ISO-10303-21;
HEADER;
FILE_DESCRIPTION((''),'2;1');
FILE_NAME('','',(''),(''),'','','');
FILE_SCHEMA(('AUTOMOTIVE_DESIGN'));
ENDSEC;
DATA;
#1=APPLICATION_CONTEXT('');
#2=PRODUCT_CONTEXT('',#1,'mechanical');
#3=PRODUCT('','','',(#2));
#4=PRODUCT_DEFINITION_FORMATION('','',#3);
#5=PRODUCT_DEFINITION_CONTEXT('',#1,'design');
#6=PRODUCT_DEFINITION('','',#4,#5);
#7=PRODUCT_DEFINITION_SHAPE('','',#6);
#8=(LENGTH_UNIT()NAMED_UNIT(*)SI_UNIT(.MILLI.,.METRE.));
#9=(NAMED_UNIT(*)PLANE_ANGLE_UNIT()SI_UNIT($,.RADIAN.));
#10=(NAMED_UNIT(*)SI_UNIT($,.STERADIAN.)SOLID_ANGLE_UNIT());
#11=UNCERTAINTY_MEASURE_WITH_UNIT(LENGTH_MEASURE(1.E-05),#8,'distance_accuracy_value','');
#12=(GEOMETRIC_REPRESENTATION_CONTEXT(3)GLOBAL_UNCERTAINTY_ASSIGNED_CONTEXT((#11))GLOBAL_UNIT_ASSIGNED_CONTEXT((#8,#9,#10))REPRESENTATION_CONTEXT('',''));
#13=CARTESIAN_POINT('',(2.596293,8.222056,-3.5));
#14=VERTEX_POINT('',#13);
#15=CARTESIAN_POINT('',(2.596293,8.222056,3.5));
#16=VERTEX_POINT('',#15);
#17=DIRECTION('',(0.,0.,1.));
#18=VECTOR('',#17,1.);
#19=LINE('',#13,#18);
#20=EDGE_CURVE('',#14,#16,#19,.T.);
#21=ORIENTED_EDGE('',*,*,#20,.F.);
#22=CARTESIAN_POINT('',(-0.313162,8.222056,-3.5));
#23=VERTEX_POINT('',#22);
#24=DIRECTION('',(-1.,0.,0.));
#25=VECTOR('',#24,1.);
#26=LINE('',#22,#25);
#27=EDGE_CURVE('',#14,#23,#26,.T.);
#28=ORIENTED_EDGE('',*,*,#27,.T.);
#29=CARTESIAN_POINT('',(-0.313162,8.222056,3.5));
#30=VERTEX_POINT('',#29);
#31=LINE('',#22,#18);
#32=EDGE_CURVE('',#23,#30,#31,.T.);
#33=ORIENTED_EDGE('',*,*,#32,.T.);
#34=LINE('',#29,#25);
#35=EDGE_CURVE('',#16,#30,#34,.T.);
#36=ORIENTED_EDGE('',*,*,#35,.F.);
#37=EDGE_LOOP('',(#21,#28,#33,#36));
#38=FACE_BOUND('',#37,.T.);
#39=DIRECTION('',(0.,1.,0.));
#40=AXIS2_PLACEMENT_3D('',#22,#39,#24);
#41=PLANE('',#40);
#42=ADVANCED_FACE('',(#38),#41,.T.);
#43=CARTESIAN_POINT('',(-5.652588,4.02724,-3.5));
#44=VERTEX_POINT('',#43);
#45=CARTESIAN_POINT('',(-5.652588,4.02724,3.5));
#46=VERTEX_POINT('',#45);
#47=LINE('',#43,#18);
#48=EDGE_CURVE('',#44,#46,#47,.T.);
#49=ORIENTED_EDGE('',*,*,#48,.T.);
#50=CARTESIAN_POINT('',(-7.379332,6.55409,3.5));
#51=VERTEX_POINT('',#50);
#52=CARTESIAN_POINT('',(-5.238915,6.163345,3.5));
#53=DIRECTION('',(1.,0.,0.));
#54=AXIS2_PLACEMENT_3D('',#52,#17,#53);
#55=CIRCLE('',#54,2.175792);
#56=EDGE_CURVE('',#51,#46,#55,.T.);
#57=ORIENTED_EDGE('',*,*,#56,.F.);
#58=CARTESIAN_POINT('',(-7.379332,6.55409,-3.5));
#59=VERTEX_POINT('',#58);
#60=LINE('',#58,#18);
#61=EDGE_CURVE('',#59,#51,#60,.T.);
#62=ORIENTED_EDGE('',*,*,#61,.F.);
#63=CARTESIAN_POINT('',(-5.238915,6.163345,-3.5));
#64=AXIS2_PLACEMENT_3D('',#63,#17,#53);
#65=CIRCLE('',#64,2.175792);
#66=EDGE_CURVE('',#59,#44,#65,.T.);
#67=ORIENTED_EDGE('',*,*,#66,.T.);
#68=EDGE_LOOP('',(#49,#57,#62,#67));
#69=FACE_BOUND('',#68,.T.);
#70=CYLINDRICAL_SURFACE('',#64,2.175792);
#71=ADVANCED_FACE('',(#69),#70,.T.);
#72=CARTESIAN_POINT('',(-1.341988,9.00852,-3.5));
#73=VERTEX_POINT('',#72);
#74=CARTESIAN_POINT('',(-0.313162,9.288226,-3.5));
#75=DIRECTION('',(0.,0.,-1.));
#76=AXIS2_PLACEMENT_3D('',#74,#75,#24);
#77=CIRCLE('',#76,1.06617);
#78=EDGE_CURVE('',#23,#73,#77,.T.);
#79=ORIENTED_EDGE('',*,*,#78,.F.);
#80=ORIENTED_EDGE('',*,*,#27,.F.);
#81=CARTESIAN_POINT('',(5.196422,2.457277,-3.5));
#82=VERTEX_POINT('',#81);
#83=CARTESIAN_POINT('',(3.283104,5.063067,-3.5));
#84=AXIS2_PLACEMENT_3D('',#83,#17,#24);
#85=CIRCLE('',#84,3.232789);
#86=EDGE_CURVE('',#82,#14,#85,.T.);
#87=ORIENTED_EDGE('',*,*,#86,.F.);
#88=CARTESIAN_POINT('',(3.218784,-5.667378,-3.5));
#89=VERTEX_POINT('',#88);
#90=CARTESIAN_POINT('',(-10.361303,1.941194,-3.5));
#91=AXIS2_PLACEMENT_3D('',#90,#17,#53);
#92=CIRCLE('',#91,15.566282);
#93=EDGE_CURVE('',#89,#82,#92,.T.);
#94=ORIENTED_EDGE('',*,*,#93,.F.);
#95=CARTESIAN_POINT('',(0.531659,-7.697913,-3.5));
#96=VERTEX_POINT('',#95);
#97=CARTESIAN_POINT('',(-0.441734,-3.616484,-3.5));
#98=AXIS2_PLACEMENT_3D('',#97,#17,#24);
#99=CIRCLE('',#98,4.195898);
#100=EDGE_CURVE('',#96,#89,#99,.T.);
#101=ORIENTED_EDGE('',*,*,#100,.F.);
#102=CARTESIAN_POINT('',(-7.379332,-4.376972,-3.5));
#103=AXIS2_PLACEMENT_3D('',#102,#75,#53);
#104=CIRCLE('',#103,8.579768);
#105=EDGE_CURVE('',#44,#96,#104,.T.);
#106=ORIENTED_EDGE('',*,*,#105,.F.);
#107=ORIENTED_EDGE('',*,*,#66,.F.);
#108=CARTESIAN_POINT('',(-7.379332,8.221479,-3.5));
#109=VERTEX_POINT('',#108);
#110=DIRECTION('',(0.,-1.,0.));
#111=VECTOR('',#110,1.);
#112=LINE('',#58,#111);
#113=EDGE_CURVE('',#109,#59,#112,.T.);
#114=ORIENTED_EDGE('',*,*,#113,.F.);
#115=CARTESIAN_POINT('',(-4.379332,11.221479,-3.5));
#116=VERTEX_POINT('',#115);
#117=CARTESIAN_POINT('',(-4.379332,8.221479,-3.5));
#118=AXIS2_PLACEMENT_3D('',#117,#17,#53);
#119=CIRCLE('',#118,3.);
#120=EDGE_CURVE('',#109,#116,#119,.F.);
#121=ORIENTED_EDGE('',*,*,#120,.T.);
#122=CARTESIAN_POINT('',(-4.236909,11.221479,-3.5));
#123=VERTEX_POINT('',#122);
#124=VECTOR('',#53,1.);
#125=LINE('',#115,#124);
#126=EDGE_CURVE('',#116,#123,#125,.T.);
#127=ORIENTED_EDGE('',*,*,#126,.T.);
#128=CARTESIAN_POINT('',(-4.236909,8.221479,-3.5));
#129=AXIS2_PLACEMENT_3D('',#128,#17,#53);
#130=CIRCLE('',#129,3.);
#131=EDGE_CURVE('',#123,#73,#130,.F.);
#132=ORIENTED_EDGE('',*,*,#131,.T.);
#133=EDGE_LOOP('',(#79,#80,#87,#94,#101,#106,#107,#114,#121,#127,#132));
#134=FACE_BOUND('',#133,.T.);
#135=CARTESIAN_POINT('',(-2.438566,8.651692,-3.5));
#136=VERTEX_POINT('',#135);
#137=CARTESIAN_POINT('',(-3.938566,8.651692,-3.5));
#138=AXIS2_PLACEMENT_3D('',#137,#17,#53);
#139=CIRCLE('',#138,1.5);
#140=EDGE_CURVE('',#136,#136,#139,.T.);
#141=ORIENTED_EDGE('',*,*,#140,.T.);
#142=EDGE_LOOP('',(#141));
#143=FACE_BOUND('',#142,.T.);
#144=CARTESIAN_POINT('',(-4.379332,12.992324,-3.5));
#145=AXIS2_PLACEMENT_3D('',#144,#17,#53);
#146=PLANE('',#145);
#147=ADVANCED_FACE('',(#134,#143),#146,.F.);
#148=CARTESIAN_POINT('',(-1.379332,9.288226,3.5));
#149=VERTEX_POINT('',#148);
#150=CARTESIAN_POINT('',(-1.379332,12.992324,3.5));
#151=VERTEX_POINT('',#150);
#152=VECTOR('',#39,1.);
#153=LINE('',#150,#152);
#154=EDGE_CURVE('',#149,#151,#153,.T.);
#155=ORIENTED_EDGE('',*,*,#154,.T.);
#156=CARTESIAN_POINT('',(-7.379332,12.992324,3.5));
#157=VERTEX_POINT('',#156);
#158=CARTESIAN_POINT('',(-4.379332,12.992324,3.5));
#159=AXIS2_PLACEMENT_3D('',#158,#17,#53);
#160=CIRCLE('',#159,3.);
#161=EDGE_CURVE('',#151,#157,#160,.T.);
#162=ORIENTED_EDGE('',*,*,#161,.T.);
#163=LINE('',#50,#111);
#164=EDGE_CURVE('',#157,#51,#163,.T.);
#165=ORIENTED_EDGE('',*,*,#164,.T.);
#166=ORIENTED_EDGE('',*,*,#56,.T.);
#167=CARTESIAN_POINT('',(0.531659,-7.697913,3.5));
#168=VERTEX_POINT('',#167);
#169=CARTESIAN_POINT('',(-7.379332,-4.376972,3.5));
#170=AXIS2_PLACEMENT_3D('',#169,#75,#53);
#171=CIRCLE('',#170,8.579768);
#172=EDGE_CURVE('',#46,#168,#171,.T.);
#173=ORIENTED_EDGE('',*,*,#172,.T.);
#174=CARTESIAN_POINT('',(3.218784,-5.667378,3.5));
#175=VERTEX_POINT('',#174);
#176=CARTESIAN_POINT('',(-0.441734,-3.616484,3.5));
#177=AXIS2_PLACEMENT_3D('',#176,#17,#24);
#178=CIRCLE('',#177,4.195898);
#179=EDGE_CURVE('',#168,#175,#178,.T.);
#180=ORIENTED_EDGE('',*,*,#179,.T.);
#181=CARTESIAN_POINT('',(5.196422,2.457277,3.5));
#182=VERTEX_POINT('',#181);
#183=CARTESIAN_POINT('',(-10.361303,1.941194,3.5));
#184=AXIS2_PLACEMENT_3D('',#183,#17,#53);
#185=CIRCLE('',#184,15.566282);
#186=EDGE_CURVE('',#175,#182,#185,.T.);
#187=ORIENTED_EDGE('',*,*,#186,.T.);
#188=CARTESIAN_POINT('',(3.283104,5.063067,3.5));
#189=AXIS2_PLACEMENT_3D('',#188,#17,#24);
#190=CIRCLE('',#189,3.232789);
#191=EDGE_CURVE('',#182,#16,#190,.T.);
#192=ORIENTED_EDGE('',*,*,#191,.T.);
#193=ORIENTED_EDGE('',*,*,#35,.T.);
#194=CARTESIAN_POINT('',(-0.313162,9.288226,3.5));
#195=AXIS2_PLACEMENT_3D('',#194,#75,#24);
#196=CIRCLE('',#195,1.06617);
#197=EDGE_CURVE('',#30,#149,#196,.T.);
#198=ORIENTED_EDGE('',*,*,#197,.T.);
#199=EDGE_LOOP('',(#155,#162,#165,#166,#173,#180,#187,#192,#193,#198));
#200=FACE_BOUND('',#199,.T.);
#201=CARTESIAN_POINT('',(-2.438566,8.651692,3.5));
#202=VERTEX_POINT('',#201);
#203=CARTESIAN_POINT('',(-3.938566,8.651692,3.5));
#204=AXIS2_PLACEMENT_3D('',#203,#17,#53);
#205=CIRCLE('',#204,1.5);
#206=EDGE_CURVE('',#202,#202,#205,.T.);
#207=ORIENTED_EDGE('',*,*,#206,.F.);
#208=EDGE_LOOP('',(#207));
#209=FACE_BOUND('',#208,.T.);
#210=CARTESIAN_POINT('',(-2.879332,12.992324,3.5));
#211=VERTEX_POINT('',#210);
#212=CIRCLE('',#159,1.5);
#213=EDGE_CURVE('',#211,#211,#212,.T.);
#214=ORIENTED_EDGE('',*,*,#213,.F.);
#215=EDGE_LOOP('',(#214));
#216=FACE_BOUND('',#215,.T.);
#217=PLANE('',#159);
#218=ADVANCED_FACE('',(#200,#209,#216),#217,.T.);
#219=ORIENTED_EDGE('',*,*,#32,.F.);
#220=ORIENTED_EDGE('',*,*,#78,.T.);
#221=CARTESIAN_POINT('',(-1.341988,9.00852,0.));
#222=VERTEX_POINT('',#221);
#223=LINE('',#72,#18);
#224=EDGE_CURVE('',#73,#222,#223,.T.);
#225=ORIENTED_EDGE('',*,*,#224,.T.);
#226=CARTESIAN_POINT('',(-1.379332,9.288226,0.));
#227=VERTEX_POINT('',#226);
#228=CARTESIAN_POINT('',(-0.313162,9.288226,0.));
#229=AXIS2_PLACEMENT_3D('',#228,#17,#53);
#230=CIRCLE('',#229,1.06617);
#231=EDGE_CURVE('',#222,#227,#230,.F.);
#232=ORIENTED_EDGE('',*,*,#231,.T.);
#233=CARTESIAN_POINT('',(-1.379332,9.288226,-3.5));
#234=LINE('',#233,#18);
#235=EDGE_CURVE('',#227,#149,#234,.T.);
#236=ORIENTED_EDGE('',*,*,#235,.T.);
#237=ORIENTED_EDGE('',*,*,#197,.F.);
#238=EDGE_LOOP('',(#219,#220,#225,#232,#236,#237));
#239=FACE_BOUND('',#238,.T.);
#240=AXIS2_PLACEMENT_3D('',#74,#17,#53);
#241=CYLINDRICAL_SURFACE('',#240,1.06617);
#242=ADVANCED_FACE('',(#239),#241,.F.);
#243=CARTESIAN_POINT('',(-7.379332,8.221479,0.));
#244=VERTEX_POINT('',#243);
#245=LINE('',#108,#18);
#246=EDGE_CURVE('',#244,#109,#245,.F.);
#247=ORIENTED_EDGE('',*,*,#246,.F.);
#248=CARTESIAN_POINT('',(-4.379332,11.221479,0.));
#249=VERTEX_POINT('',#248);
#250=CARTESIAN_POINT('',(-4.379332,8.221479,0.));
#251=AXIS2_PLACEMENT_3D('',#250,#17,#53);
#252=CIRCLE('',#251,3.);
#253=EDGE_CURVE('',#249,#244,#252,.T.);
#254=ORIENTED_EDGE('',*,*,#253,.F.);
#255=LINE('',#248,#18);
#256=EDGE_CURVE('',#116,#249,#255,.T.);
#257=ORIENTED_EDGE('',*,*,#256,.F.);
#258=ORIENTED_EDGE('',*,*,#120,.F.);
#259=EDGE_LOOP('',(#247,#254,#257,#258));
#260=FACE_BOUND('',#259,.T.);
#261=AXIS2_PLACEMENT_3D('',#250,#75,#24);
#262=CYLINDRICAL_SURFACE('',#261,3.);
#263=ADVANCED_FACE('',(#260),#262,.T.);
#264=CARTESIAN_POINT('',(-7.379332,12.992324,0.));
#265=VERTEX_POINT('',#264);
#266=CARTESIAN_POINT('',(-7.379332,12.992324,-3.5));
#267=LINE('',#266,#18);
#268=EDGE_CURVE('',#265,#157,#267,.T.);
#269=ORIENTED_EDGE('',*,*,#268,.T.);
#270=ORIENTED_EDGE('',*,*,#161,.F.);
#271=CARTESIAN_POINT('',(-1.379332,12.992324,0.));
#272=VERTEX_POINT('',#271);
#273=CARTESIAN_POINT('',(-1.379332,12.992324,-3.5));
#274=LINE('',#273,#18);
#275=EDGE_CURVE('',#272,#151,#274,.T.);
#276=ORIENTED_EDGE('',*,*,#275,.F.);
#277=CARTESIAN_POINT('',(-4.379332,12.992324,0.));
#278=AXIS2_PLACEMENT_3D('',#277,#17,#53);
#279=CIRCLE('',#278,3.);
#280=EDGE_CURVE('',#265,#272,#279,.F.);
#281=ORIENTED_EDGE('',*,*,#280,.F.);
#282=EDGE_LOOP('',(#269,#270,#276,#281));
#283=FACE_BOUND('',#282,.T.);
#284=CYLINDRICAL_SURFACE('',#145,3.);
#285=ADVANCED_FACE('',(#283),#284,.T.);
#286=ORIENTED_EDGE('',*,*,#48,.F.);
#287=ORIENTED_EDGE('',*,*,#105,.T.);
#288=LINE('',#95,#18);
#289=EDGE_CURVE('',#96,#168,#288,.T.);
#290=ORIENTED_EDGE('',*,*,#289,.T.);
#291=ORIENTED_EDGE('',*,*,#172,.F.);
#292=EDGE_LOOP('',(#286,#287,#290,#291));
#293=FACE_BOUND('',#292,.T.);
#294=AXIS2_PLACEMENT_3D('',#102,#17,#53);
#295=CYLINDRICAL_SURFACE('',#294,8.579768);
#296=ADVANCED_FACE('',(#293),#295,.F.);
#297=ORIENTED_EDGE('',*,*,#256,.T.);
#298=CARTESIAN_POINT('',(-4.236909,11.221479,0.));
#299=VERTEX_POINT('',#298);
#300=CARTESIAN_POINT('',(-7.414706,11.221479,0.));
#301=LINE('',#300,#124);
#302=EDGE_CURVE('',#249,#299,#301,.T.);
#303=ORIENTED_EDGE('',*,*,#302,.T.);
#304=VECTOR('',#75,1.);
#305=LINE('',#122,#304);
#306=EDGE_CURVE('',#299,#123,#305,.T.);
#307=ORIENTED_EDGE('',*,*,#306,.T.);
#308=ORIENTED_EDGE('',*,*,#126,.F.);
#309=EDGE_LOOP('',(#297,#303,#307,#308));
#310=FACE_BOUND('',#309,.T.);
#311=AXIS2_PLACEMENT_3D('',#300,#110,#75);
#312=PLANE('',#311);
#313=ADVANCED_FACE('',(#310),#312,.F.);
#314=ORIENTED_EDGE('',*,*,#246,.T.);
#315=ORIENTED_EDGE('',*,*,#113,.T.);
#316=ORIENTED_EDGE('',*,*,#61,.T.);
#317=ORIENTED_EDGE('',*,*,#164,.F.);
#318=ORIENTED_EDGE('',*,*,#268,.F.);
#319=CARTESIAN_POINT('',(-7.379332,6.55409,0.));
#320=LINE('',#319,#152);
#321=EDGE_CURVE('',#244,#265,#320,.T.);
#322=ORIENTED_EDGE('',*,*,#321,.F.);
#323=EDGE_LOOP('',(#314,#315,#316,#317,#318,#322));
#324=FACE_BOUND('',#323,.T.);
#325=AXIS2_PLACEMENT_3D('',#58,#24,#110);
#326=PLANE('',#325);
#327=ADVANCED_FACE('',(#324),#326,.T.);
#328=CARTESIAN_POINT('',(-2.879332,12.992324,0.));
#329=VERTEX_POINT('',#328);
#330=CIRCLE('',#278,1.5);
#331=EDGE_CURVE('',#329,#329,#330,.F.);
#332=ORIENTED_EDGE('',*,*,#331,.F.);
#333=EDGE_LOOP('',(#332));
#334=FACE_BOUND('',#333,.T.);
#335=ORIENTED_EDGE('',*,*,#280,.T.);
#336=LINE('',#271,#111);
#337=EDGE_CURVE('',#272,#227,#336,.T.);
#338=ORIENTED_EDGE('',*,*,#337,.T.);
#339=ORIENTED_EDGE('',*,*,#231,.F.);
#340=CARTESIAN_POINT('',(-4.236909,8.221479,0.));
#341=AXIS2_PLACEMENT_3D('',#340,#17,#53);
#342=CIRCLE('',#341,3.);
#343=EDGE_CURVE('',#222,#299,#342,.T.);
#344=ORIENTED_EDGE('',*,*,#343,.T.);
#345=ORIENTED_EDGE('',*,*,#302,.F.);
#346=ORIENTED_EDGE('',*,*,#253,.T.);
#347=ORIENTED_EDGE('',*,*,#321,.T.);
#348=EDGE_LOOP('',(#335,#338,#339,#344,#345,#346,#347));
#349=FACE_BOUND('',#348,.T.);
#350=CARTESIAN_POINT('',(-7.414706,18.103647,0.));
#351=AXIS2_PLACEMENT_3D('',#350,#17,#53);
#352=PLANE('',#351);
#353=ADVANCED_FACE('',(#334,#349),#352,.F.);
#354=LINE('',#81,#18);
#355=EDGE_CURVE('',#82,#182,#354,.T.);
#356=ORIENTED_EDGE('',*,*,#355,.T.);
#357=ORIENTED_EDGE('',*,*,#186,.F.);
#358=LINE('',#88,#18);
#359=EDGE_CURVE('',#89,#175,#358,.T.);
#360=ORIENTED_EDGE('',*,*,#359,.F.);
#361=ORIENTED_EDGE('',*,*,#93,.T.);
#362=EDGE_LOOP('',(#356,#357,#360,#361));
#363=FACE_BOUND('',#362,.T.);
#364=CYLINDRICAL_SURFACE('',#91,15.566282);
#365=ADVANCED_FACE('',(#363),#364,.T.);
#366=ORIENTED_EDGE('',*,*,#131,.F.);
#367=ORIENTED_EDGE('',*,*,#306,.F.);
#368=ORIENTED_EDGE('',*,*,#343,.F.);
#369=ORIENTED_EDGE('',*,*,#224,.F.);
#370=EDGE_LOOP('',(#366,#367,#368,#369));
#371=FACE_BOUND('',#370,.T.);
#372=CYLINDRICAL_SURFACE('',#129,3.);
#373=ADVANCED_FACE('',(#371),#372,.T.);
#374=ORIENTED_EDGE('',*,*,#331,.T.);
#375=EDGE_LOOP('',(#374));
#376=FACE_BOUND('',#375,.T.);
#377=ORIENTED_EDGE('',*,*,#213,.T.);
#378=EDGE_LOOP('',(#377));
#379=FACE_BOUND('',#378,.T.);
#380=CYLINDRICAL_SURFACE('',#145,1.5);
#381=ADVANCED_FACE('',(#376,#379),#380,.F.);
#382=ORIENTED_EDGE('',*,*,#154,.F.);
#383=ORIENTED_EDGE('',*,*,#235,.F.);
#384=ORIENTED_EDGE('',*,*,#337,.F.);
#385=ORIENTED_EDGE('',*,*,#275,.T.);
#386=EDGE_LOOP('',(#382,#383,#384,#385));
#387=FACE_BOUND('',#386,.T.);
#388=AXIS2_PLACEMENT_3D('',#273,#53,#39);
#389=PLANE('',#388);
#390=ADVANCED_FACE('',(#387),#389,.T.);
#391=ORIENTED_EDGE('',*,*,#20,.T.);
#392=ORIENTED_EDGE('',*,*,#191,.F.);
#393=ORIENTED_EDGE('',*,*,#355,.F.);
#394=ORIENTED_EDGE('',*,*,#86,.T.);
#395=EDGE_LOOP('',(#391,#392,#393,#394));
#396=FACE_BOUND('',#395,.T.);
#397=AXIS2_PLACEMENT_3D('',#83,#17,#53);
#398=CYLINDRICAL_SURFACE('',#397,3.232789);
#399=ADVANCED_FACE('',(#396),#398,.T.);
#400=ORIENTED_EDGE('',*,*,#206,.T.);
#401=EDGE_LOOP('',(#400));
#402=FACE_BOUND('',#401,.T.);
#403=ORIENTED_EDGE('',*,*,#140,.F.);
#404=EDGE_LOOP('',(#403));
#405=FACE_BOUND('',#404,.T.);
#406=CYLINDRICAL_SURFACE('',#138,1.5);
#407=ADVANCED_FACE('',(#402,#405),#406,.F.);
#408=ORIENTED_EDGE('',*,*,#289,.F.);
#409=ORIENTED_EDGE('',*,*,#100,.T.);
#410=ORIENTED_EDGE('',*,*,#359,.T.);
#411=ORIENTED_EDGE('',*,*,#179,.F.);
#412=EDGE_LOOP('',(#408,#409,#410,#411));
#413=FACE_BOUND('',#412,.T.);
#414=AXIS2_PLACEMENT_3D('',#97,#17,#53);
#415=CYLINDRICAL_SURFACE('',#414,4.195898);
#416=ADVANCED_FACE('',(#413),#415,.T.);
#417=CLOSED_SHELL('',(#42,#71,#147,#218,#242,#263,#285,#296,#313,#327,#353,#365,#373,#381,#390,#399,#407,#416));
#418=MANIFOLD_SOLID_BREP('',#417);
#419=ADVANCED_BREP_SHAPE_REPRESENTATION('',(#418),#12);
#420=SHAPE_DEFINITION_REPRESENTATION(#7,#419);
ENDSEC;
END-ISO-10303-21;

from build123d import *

# Parameters (mm, degrees)
BOSS_EXTRUDE1_DEPTH      = 3.5
BOSS_EXTRUDE1_DEPTH_BACK = 3.5
SKETCH6_R                = 1.5
CUT_EXTRUDE1_DEPTH       = 19.96660999
SKETCH7_W                = 4.034122634
SKETCH7_H                = 6.882168449
CUT_EXTRUDE2_DEPTH       = 18.97170817
FILLET1_R                = 3
CUT_EXTRUDE3_DEPTH       = 18.97170817
CUT_EXTRUDE3_DEPTH_BACK  = 18.97170817
SKETCH5_R                = 1.5


with BuildPart() as part:
    # Sketch1 → Boss-Extrude1 (new, two sides: drawn at the far end of the back side and taken through both)
    with BuildSketch(Plane.XY.offset(-BOSS_EXTRUDE1_DEPTH_BACK)):
        with BuildLine():
            Line((-7.379331989, 6.554089817), (-7.379331989, 12.992324067))
            ThreePointArc((-7.379331989, 12.992324067), (-4.379331989, 15.992324067), (-1.379331989, 12.992324067))
            Line((-1.379331989, 12.992324067), (-1.379331989, 9.288226288))
            ThreePointArc((-1.379331989, 9.288226288), (-1.067058002, 8.534330194), (-0.313161909, 8.222056208))
            Line((-0.313161909, 8.222056208), (2.596292865, 8.222056208))
            ThreePointArc((2.596292865, 8.222056208), (6.230009224, 6.392230094), (5.19642183, 2.457277072))
            ThreePointArc((5.19642183, 2.457277072), (4.763363262, -1.740328915), (3.218784408, -5.667377669))
            ThreePointArc((3.218784408, -5.667377669), (2.087900651, -6.964096239), (0.531658525, -7.697913361))
            ThreePointArc((0.531658525, -7.697913361), (0.209560398, -0.37433078), (-5.652587934, 4.027240071))
            ThreePointArc((-5.652587934, 4.027240071), (-7.035324124, 4.93575307), (-7.379331989, 6.554089817))
        make_face()
    extrude(amount=BOSS_EXTRUDE1_DEPTH + BOSS_EXTRUDE1_DEPTH_BACK)

    # Sketch6 → Cut-Extrude1 (cut, through all)
    with BuildSketch(Plane.XY.offset(3.5)):
        with Locations((-4.379331989, 12.992324067)):
            Circle(SKETCH6_R)
    extrude(amount=-CUT_EXTRUDE1_DEPTH, mode=Mode.SUBTRACT)

    # Sketch7 → Cut-Extrude2 (cut, through all)
    with BuildSketch(Plane(origin=(0, 0, 0), x_dir=(0, 0, -1), z_dir=(1, 0, 0))):
        with Locations((2.017061317, 14.662562736)):
            Rectangle(SKETCH7_W, SKETCH7_H)
    extrude(amount=-CUT_EXTRUDE2_DEPTH, mode=Mode.SUBTRACT)

    # Fillet1
    # the kernel refuses this fillet: 3 mm, written as the material it takes off along each edge
    with BuildSketch(Plane(origin=(-7.379331989, 11.221478511, 0), x_dir=(0, -1, 0), z_dir=(0, 0, -1))) as fillet1_piece_1:
        with BuildLine():
            CenterArc((FILLET1_R, -FILLET1_R), FILLET1_R, 90, 90)
            Line((0, -FILLET1_R), (0, 0))
            Line((0, 0), (FILLET1_R, 0))
        make_face()
    extrude(amount=11, mode=Mode.SUBTRACT)
    with BuildSketch(Plane(origin=(-1.379331989, 11.221478511, -10.643941593), x_dir=(0.016872794888794368, -0.9998576442637425, 0), z_dir=(0, 0, 1))) as fillet1_piece_2:
        with BuildLine():
            CenterArc((2.951357628, -2.907788229), FILLET1_R, 104.242588424, 74.790625764)
            Line((-0.048215304, -2.857169845), (-0.348172598, -2.852108006))
            Line((-0.348172598, -2.852108006), (-0.299957293, 0.005061838))
            Line((-0.299957293, 0.005061838), (0.005061838, 0.299957293))
            ThreePointArc((0.005061838, 0.299957293), (1.938038852, 0.267337925), (2.13946551, 0.290778823))
            Line((2.13946551, 0.290778823), (2.213273884, 0))
        make_face()
    extrude(amount=10.643941593, mode=Mode.SUBTRACT)

    # Sketch5 → Cut-Extrude3 (cut, two sides: drawn at the far end of the back side and taken through both)
    with BuildSketch(Plane.XY.offset(-CUT_EXTRUDE3_DEPTH_BACK)):
        with Locations((-3.938565523, 8.651692055)):
            Circle(SKETCH5_R)
    extrude(amount=CUT_EXTRUDE3_DEPTH + CUT_EXTRUDE3_DEPTH_BACK, mode=Mode.SUBTRACT)


solid = part.part
